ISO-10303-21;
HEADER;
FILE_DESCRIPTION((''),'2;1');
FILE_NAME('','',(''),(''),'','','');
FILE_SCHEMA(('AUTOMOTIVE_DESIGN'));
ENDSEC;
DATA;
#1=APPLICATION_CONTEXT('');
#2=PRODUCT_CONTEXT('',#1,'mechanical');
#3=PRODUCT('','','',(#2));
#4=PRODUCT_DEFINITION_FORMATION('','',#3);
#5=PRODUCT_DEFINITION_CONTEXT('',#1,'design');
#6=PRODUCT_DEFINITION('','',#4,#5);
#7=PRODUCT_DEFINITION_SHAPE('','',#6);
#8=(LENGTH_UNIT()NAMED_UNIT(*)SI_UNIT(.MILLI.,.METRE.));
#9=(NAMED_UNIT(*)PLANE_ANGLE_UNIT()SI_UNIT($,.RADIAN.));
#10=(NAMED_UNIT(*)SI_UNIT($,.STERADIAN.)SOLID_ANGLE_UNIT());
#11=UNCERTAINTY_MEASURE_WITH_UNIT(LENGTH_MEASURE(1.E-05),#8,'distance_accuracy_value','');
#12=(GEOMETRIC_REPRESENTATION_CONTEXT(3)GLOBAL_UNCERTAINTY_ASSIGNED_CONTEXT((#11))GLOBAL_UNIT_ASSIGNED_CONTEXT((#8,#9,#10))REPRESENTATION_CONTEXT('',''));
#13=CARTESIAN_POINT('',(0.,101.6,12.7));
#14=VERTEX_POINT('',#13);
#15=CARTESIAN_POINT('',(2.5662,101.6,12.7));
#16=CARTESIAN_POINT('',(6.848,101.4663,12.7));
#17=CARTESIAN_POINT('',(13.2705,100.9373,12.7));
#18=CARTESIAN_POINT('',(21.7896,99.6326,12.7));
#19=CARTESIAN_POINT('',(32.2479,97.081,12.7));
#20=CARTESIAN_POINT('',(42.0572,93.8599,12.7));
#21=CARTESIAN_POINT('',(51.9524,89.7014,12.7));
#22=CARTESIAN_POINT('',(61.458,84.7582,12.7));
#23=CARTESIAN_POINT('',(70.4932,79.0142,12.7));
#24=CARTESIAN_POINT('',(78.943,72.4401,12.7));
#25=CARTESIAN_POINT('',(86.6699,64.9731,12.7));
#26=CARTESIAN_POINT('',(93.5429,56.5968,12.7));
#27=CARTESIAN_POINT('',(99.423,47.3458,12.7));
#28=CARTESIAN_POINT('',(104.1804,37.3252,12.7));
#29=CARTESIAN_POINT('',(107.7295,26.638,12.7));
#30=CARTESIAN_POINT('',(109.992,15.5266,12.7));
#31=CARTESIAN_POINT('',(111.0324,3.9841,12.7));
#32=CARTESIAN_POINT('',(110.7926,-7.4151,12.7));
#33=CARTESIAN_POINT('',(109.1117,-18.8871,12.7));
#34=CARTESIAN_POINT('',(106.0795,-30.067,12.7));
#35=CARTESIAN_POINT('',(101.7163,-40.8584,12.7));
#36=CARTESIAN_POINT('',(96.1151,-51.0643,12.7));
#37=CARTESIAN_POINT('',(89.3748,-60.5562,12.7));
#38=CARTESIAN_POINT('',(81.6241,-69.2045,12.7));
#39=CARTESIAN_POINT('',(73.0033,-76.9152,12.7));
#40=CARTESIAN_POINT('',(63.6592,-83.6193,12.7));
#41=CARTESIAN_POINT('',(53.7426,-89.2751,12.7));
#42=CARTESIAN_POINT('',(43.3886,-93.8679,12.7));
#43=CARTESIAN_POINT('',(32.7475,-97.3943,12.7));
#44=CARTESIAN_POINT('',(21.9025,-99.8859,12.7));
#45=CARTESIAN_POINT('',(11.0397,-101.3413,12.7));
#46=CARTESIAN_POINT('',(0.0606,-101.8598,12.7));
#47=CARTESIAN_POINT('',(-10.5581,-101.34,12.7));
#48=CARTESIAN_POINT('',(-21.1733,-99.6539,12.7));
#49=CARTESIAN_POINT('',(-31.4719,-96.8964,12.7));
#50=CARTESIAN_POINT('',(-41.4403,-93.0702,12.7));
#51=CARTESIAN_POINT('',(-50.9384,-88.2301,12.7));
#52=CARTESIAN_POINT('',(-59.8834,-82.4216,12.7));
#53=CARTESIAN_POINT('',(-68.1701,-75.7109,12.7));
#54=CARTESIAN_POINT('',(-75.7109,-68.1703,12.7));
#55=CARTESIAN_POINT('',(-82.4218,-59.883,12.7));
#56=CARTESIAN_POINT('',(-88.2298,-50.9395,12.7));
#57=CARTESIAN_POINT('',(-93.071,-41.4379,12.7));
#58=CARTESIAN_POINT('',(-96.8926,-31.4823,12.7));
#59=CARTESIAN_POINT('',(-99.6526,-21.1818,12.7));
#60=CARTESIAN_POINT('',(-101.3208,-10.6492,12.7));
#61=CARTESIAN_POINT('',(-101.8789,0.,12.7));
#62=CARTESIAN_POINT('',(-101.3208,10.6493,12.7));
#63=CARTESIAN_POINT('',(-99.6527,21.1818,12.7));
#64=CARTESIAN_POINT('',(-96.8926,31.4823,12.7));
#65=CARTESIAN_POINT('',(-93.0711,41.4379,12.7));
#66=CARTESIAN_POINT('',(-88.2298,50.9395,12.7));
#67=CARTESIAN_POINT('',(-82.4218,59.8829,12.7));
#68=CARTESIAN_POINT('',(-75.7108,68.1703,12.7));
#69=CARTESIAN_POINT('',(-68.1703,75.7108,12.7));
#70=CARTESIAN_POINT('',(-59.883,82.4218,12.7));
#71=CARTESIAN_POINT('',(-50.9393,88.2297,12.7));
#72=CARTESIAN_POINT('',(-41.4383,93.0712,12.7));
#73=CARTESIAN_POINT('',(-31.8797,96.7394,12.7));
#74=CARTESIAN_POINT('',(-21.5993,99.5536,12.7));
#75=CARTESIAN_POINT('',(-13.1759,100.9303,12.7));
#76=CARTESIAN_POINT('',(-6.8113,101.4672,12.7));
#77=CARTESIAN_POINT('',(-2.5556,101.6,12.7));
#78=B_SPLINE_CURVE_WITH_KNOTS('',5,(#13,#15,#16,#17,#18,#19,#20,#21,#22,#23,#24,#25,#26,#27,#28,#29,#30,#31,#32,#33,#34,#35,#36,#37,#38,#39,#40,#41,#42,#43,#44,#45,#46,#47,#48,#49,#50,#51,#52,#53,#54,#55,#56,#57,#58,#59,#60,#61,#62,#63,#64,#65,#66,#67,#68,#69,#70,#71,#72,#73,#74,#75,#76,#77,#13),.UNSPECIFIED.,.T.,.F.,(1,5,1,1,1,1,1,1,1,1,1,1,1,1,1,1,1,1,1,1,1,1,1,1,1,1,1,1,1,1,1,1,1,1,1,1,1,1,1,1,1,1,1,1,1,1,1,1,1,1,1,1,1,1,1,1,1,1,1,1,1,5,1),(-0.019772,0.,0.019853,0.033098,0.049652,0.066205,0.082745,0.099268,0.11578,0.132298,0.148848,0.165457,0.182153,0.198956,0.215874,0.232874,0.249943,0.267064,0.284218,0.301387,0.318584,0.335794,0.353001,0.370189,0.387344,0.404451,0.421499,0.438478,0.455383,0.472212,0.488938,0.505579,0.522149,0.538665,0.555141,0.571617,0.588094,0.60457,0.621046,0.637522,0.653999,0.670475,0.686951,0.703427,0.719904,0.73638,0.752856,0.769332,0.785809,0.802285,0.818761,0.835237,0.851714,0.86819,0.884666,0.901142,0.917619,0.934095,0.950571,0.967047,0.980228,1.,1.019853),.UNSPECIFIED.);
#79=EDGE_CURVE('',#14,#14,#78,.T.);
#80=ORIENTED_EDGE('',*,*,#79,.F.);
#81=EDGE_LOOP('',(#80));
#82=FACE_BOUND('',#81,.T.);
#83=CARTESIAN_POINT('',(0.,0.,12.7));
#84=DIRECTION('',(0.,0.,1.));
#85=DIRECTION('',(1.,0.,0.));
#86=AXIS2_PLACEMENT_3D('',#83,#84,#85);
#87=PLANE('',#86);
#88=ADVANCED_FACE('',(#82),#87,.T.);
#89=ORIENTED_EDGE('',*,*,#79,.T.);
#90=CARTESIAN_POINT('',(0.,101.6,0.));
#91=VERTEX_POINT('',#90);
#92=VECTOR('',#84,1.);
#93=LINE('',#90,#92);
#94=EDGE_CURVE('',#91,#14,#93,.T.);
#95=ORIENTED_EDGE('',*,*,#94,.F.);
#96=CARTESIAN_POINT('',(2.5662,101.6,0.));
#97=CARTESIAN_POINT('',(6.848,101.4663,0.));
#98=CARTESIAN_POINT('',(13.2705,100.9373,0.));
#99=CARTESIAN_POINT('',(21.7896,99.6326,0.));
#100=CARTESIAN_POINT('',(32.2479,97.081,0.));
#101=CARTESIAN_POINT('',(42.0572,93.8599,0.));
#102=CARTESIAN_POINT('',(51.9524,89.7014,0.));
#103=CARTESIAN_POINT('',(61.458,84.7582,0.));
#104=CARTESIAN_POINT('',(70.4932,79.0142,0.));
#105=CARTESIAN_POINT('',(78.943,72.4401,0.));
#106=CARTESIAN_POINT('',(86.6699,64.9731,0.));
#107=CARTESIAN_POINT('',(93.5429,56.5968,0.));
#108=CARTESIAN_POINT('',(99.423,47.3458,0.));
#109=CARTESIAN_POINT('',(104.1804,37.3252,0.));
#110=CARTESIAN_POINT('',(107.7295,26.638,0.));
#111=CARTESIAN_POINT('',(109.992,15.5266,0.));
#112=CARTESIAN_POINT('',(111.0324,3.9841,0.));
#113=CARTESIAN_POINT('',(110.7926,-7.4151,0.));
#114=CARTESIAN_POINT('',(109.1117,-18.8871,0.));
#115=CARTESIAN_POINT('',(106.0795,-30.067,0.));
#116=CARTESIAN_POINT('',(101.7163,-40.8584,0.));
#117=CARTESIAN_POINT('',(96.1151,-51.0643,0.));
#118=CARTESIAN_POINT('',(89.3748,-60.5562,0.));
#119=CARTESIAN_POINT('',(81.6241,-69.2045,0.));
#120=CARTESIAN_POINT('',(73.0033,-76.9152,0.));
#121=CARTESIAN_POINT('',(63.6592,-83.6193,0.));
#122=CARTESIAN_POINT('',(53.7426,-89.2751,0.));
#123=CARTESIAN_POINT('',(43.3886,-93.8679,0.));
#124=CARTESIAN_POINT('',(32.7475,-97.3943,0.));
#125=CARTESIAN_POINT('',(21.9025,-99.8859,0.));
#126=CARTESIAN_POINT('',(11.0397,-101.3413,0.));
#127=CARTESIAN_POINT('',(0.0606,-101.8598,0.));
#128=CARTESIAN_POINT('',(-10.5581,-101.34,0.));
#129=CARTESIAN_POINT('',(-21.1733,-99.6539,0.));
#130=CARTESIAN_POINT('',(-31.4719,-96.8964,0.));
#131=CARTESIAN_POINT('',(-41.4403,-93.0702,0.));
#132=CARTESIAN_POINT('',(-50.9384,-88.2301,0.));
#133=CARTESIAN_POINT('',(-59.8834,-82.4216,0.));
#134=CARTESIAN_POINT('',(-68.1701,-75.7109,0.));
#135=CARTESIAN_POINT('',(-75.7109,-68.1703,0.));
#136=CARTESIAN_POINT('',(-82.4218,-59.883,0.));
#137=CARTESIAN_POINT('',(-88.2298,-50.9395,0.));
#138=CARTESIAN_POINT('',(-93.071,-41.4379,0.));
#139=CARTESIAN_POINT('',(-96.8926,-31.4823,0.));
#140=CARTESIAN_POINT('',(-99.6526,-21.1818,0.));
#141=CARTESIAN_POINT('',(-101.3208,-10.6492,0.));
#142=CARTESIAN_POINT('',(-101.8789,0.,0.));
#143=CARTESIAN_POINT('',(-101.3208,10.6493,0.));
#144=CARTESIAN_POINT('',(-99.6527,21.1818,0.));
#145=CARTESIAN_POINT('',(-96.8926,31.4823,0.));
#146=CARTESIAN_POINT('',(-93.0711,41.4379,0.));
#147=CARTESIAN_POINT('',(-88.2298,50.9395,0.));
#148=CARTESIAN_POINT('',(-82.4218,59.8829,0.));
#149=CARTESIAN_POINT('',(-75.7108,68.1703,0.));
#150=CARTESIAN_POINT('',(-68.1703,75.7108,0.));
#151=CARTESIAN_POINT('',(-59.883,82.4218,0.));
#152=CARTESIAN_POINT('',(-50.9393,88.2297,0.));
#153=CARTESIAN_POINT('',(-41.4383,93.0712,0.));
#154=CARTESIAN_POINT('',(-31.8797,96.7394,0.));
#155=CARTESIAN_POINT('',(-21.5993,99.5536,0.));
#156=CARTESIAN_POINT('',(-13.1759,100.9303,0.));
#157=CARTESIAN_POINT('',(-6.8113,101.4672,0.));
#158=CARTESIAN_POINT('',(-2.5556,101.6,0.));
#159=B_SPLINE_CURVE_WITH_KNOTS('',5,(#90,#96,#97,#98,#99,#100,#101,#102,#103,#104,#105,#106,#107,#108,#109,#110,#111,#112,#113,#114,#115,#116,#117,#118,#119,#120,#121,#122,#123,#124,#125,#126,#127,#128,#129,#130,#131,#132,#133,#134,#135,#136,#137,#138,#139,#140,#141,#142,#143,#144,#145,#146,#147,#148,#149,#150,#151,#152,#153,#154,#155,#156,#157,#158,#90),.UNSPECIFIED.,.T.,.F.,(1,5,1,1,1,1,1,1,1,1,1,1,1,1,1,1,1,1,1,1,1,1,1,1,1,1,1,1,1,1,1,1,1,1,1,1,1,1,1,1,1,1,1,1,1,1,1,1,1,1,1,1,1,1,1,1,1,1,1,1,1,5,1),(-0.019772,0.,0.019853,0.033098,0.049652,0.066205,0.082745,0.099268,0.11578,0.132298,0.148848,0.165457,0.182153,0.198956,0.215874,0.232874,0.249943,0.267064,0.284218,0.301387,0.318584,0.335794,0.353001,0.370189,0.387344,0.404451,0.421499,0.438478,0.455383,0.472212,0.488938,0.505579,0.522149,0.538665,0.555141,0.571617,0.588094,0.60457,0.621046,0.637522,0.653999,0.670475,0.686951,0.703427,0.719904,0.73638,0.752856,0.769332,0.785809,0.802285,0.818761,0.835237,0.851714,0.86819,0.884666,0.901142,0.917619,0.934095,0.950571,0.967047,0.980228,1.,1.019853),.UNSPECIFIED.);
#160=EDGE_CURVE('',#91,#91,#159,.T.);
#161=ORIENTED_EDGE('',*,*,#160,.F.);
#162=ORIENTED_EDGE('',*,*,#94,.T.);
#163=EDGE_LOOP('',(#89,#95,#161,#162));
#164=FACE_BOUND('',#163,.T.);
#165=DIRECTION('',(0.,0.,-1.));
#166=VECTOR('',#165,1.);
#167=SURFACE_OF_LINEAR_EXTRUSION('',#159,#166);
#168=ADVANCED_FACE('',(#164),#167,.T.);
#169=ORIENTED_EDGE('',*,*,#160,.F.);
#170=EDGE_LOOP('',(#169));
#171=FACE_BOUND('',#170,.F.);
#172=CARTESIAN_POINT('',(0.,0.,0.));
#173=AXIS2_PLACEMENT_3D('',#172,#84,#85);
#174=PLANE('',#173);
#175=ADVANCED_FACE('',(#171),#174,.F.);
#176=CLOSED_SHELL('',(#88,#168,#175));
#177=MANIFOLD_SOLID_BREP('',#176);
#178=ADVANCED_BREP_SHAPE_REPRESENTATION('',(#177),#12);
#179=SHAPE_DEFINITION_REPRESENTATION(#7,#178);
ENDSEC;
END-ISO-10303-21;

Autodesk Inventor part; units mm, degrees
ref_plane "YZ Plane" through (0, 0, 0) normal (1, 0, 0) x (0, 1, 0)
ref_plane "XZ Plane" through (0, 0, 0) normal (0, 1, 0) x (-1, 0, 0)
ref_plane "XY Plane" through (0, 0, 0) normal (0, 0, 1) x (1, 0, 0)
sketch "Main Sketch" plane through (0, 0, 0) normal (0, 0, 1) x (1, 0, 0)
  spline S0 degree 5 poles (0, 101.6) (2.5662, 101.6) (6.848, 101.4663) (13.2705, 100.9373) (21.7896, 99.6326) (32.2479, 97.081) (42.0572, 93.8599) (51.9524, 89.7014) (61.458, 84.7582) (70.4932, 79.0142) (78.943, 72.4401) (86.6699, 64.9731) (93.5429, 56.5968) (99.423, 47.3458) (104.1804, 37.3252) (107.7295, 26.638) (109.992, 15.5266) (111.0324, 3.9841) (110.7926, -7.4151) (109.1117, -18.8871) (106.0795, -30.067) (101.7163, -40.8584) (96.1151, -51.0643) (89.3748, -60.5562) (81.6241, -69.2045) (73.0033, -76.9152) (63.6592, -83.6193) (53.7426, -89.2751) (43.3886, -93.8679) (32.7475, -97.3943) (21.9025, -99.8859) (11.0397, -101.3413) (0.0606, -101.8598) (-10.5581, -101.34) (-21.1733, -99.6539) (-31.4719, -96.8964) (-41.4403, -93.0702) (-50.9384, -88.2301) (-59.8834, -82.4216) (-68.1701, -75.7109) (-75.7109, -68.1703) (-82.4218, -59.883) (-88.2298, -50.9395) (-93.071, -41.4379) (-96.8926, -31.4823) (-99.6526, -21.1818) (-101.3208, -10.6492) (-101.8789, 0) (-101.3208, 10.6493) (-99.6527, 21.1818) (-96.8926, 31.4823) (-93.0711, 41.4379) (-88.2298, 50.9395) (-82.4218, 59.8829) (-75.7108, 68.1703) (-68.1703, 75.7108) (-59.883, 82.4218) (-50.9393, 88.2297) (-41.4383, 93.0712) (-31.8797, 96.7394) (-21.5993, 99.5536) (-13.1759, 100.9303) (-6.8113, 101.4672) (-2.5556, 101.6) (0, 101.6) knots 0 0 0 0 0 0 0.019853 0.033098 0.049652 0.066205 0.082745 0.099268 0.11578 0.132298 0.148848 0.165457 0.182153 0.198956 0.215874 0.232874 0.249943 0.267064 0.284218 0.301387 0.318584 0.335794 0.353001 0.370189 0.387344 0.404451 0.421499 0.438478 0.455383 0.472212 0.488938 0.505579 0.522149 0.538665 0.555141 0.571617 0.588094 0.60457 0.621046 0.637522 0.653999 0.670475 0.686951 0.703427 0.719904 0.73638 0.752856 0.769332 0.785809 0.802285 0.818761 0.835237 0.851714 0.86819 0.884666 0.901142 0.917619 0.934095 0.950571 0.967047 0.980228 1 1 1 1 1 1
  point P0 (21.3135, 99.4946)
  point P1 (31.7845, 97.0009)
  point P2 (41.9969, 93.6512)
  point P3 (51.8777, 89.4943)
  point P4 (61.3554, 84.5492)
  point P5 (70.3444, 78.8083)
  point P6 (78.7313, 72.2447)
  point P7 (86.3959, 64.8125)
  point P8 (93.2176, 56.486)
  point P9 (99.0655, 47.2934)
  point P10 (103.8158, 37.3152)
  point P11 (107.3696, 26.676)
  point P12 (109.6693, 15.5317)
  point P13 (110.7099, 4.0511)
  point P14 (110.4381, -7.3812)
  point P15 (108.7828, -18.7699)
  point P16 (105.7591, -29.9337)
  point P17 (101.4148, -40.6953)
  point P18 (95.8283, -50.889)
  point P19 (89.1046, -60.3674)
  point P20 (81.3702, -69.0065)
  point P21 (72.7658, -76.709)
  point P22 (63.4399, -83.4061)
  point P23 (53.5408, -89.0561)
  point P24 (43.2109, -93.6422)
  point P25 (32.582, -97.1675)
  point P26 (21.7714, -99.6502)
  point P27 (10.8815, -101.1176)
  point P28 (0, -101.6)
  point P29 (-10.6201, -101.0434)
  point P30 (-21.1238, -99.3798)
  point P31 (-31.3961, -96.6273)
  point P32 (-41.3244, -92.8162)
  point P33 (-50.8, -87.9882)
  point P34 (-59.719, -82.1961)
  point P35 (-67.9837, -75.5035)
  point P36 (-75.5035, -67.9837)
  point P37 (-82.1961, -59.719)
  point P38 (-87.9882, -50.8)
  point P39 (-92.8162, -41.3244)
  point P40 (-96.6273, -31.3961)
  point P41 (-99.3798, -21.1238)
  point P42 (-101.0434, -10.6201)
  point P43 (-101.6, 0)
  point P44 (-101.0434, 10.6201)
  point P45 (-99.3798, 21.1238)
  point P46 (-96.6273, 31.3961)
  point P47 (-92.8162, 41.3244)
  point P48 (-87.9882, 50.8)
  point P49 (-82.1961, 59.719)
  point P50 (-75.5035, 67.9837)
  point P51 (-67.9837, 75.5035)
  point P52 (-59.719, 82.1961)
  point P53 (-50.8, 87.9882)
  point P54 (-41.3244, 92.8162)
  point P55 (-31.3961, 96.6273)
  point P56 (-21.1238, 99.3798)
  point P57 (-10.6201, 101.0434)
extrude "Cam" add sketch "Main Sketch" along normal blind 12.7
properties part number "Disc Cam" material "Stainless Steel, Austenitic"
